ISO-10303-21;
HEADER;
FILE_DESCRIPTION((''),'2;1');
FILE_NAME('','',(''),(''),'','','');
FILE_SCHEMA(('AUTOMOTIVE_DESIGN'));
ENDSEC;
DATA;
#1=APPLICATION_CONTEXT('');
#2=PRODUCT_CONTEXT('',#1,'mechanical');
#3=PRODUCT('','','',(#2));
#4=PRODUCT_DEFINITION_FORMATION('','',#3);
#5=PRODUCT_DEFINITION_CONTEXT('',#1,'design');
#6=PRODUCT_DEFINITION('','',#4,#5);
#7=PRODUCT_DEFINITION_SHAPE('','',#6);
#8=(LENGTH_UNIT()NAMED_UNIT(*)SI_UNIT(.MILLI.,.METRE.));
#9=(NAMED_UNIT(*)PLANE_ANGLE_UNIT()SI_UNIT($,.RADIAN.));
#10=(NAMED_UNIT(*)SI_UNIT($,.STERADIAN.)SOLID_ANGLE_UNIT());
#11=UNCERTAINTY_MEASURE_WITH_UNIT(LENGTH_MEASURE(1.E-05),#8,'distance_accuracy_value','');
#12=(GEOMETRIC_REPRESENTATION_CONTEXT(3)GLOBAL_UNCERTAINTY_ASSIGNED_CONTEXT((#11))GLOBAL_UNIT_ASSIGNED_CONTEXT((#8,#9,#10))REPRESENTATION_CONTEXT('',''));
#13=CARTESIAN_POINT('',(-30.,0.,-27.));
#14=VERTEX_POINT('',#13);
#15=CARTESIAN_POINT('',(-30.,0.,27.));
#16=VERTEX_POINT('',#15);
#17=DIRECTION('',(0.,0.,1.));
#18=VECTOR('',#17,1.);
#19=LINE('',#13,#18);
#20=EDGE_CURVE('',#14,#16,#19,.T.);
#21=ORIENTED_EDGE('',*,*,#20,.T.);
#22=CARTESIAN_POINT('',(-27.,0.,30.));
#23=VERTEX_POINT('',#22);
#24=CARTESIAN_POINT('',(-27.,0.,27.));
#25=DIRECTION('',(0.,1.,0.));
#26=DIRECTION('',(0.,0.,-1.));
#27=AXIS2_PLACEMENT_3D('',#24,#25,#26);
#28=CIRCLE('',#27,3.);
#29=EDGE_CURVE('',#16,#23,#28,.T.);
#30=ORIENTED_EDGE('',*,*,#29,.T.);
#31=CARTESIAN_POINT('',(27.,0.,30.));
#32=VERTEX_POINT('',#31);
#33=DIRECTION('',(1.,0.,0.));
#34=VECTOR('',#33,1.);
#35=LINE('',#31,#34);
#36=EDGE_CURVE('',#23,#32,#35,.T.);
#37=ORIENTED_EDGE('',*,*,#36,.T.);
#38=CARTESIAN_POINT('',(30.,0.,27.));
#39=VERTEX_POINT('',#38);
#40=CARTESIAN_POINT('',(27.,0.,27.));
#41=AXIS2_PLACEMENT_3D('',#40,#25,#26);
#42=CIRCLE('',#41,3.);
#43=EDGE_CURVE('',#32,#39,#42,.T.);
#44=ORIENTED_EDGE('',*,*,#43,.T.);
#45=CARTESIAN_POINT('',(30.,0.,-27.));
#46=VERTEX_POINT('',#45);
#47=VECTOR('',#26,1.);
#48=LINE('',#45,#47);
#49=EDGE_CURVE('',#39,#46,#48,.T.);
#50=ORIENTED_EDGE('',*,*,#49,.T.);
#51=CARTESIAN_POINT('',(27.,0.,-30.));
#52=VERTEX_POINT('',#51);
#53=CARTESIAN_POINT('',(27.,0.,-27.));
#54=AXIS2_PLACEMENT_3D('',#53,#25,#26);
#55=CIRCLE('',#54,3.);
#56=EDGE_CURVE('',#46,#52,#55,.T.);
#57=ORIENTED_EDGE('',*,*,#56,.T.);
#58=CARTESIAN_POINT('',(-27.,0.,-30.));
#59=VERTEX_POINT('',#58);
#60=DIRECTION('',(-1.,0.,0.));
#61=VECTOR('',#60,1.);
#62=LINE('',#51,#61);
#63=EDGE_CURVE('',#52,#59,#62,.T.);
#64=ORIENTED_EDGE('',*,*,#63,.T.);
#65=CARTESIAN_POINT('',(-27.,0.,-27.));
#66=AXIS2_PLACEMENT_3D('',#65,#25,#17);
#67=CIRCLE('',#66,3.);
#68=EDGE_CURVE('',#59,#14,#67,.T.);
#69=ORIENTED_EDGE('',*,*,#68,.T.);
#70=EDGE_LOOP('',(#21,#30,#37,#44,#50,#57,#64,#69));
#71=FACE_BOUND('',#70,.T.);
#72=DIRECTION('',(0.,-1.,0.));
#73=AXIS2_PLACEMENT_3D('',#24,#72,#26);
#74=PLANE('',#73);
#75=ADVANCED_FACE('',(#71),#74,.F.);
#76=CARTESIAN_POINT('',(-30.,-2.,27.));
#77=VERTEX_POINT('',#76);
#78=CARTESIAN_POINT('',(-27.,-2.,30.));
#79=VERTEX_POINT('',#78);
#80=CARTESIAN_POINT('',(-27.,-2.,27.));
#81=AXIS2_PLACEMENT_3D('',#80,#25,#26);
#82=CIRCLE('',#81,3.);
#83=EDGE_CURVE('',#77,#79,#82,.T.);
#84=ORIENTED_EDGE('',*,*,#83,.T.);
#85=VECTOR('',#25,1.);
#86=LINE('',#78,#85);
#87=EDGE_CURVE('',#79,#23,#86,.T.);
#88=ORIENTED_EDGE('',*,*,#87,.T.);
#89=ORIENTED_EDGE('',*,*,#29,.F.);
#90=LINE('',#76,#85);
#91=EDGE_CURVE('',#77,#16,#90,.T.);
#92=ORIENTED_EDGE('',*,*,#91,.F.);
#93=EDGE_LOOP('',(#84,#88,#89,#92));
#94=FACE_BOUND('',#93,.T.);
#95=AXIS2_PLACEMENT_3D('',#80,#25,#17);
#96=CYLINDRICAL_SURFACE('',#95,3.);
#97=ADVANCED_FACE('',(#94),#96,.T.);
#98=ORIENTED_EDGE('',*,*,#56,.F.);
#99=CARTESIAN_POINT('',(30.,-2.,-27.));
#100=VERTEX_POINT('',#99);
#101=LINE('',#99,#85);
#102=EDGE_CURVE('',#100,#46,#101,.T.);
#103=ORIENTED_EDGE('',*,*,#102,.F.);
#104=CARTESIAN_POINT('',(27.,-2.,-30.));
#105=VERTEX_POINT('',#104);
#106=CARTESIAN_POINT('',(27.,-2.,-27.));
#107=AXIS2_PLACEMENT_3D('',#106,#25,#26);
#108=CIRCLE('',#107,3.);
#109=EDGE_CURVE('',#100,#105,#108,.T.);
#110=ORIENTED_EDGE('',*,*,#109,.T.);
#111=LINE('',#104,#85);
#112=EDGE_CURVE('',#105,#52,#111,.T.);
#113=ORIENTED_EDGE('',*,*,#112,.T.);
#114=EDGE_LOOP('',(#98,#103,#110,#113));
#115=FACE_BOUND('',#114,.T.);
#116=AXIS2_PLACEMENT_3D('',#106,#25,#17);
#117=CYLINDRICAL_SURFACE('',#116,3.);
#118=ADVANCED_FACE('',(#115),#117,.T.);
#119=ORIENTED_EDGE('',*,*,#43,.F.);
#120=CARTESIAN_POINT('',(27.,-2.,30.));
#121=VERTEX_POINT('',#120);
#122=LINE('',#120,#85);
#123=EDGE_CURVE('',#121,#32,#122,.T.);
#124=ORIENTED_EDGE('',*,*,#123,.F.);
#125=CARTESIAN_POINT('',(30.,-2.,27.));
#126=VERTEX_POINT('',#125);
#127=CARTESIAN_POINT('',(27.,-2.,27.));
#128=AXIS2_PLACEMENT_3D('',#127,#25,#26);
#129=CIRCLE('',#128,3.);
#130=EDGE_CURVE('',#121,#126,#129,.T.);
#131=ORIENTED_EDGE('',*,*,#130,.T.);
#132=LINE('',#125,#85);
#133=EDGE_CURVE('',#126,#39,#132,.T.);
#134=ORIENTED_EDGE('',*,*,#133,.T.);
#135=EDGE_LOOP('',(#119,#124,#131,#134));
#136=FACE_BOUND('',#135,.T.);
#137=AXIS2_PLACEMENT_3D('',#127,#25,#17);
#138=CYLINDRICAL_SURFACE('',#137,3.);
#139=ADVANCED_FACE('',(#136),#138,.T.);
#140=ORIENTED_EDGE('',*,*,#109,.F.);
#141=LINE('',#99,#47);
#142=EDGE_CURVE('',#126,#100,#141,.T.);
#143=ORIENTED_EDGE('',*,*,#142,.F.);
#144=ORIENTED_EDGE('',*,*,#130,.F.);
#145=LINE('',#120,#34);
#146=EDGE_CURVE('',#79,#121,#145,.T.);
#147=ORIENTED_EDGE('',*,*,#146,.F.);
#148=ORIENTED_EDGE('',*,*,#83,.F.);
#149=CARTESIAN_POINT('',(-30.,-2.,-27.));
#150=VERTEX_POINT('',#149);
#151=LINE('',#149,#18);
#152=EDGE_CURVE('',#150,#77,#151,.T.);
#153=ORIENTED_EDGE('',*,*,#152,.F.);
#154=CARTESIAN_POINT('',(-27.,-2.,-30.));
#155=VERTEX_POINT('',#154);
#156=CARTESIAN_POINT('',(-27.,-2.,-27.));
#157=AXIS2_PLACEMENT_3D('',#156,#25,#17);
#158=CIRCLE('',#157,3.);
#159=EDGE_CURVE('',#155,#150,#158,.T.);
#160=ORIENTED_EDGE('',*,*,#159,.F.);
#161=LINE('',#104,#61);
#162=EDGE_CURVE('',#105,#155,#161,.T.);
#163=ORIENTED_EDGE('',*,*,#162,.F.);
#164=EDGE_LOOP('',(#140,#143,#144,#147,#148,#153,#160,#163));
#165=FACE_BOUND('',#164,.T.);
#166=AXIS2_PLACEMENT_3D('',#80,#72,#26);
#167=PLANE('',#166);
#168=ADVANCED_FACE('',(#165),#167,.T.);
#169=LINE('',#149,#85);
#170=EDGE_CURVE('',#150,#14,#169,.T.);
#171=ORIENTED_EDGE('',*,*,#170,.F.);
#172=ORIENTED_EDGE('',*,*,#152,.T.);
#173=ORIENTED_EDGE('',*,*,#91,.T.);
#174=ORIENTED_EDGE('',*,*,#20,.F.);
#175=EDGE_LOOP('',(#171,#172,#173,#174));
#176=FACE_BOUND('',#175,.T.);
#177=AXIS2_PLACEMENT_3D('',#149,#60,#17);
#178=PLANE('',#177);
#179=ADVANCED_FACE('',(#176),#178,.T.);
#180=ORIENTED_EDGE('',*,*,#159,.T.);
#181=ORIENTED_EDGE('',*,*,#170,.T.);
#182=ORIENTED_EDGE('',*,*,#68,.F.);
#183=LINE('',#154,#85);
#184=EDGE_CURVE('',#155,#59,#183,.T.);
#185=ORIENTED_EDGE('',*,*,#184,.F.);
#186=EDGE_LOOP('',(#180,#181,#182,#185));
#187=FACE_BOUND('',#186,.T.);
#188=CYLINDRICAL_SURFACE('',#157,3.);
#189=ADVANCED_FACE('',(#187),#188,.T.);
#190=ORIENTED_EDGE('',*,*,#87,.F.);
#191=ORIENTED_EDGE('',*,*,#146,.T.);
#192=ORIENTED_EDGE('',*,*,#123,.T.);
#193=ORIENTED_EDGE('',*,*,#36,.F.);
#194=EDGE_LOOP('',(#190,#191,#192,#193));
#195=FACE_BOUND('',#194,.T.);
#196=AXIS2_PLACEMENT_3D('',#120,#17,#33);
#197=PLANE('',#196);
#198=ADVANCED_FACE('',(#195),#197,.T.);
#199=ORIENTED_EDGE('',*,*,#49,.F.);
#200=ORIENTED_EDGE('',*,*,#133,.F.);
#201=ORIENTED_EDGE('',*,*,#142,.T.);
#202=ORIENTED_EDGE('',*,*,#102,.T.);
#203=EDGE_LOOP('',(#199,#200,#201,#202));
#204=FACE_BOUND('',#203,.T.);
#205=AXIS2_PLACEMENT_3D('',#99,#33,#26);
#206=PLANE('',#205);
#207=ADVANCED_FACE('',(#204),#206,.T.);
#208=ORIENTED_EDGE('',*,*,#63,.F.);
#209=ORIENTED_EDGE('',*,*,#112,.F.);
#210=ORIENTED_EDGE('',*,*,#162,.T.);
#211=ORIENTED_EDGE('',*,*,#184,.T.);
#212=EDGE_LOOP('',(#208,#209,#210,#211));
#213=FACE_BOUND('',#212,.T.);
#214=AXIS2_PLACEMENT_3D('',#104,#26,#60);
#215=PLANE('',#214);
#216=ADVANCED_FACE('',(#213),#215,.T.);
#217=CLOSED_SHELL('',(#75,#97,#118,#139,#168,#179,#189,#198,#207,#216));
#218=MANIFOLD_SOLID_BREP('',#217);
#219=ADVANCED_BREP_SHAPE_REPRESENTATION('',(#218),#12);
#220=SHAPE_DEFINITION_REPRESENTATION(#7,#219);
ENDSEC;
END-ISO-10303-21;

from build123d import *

# Parameters (mm, degrees)
SM_BASE_FLANGE_1_DEPTH = 2


# Sheet-metal steps are written as plain solids
with BuildPart() as part:
    # Sketch 1 → Базовая кромка1 (new body)
    with BuildSketch(Plane(origin=(0, 0, 0), x_dir=(1, 0, 0), z_dir=(0, 1, 0))):
        with BuildLine():
            Line((27, 30), (-27, 30))
            ThreePointArc((-27, 30), (-29.121320344, 29.121320344), (-30, 27))
            Line((-30, 27), (-30, -27))
            ThreePointArc((-30, -27), (-29.121320344, -29.121320344), (-27, -30))
            Line((-27, -30), (27, -30))
            ThreePointArc((27, -30), (29.121320344, -29.121320344), (30, -27))
            Line((30, -27), (30, 27))
            ThreePointArc((30, 27), (29.121320344, 29.121320344), (27, 30))
        make_face()
    extrude(amount=-SM_BASE_FLANGE_1_DEPTH)


solid = part.part
